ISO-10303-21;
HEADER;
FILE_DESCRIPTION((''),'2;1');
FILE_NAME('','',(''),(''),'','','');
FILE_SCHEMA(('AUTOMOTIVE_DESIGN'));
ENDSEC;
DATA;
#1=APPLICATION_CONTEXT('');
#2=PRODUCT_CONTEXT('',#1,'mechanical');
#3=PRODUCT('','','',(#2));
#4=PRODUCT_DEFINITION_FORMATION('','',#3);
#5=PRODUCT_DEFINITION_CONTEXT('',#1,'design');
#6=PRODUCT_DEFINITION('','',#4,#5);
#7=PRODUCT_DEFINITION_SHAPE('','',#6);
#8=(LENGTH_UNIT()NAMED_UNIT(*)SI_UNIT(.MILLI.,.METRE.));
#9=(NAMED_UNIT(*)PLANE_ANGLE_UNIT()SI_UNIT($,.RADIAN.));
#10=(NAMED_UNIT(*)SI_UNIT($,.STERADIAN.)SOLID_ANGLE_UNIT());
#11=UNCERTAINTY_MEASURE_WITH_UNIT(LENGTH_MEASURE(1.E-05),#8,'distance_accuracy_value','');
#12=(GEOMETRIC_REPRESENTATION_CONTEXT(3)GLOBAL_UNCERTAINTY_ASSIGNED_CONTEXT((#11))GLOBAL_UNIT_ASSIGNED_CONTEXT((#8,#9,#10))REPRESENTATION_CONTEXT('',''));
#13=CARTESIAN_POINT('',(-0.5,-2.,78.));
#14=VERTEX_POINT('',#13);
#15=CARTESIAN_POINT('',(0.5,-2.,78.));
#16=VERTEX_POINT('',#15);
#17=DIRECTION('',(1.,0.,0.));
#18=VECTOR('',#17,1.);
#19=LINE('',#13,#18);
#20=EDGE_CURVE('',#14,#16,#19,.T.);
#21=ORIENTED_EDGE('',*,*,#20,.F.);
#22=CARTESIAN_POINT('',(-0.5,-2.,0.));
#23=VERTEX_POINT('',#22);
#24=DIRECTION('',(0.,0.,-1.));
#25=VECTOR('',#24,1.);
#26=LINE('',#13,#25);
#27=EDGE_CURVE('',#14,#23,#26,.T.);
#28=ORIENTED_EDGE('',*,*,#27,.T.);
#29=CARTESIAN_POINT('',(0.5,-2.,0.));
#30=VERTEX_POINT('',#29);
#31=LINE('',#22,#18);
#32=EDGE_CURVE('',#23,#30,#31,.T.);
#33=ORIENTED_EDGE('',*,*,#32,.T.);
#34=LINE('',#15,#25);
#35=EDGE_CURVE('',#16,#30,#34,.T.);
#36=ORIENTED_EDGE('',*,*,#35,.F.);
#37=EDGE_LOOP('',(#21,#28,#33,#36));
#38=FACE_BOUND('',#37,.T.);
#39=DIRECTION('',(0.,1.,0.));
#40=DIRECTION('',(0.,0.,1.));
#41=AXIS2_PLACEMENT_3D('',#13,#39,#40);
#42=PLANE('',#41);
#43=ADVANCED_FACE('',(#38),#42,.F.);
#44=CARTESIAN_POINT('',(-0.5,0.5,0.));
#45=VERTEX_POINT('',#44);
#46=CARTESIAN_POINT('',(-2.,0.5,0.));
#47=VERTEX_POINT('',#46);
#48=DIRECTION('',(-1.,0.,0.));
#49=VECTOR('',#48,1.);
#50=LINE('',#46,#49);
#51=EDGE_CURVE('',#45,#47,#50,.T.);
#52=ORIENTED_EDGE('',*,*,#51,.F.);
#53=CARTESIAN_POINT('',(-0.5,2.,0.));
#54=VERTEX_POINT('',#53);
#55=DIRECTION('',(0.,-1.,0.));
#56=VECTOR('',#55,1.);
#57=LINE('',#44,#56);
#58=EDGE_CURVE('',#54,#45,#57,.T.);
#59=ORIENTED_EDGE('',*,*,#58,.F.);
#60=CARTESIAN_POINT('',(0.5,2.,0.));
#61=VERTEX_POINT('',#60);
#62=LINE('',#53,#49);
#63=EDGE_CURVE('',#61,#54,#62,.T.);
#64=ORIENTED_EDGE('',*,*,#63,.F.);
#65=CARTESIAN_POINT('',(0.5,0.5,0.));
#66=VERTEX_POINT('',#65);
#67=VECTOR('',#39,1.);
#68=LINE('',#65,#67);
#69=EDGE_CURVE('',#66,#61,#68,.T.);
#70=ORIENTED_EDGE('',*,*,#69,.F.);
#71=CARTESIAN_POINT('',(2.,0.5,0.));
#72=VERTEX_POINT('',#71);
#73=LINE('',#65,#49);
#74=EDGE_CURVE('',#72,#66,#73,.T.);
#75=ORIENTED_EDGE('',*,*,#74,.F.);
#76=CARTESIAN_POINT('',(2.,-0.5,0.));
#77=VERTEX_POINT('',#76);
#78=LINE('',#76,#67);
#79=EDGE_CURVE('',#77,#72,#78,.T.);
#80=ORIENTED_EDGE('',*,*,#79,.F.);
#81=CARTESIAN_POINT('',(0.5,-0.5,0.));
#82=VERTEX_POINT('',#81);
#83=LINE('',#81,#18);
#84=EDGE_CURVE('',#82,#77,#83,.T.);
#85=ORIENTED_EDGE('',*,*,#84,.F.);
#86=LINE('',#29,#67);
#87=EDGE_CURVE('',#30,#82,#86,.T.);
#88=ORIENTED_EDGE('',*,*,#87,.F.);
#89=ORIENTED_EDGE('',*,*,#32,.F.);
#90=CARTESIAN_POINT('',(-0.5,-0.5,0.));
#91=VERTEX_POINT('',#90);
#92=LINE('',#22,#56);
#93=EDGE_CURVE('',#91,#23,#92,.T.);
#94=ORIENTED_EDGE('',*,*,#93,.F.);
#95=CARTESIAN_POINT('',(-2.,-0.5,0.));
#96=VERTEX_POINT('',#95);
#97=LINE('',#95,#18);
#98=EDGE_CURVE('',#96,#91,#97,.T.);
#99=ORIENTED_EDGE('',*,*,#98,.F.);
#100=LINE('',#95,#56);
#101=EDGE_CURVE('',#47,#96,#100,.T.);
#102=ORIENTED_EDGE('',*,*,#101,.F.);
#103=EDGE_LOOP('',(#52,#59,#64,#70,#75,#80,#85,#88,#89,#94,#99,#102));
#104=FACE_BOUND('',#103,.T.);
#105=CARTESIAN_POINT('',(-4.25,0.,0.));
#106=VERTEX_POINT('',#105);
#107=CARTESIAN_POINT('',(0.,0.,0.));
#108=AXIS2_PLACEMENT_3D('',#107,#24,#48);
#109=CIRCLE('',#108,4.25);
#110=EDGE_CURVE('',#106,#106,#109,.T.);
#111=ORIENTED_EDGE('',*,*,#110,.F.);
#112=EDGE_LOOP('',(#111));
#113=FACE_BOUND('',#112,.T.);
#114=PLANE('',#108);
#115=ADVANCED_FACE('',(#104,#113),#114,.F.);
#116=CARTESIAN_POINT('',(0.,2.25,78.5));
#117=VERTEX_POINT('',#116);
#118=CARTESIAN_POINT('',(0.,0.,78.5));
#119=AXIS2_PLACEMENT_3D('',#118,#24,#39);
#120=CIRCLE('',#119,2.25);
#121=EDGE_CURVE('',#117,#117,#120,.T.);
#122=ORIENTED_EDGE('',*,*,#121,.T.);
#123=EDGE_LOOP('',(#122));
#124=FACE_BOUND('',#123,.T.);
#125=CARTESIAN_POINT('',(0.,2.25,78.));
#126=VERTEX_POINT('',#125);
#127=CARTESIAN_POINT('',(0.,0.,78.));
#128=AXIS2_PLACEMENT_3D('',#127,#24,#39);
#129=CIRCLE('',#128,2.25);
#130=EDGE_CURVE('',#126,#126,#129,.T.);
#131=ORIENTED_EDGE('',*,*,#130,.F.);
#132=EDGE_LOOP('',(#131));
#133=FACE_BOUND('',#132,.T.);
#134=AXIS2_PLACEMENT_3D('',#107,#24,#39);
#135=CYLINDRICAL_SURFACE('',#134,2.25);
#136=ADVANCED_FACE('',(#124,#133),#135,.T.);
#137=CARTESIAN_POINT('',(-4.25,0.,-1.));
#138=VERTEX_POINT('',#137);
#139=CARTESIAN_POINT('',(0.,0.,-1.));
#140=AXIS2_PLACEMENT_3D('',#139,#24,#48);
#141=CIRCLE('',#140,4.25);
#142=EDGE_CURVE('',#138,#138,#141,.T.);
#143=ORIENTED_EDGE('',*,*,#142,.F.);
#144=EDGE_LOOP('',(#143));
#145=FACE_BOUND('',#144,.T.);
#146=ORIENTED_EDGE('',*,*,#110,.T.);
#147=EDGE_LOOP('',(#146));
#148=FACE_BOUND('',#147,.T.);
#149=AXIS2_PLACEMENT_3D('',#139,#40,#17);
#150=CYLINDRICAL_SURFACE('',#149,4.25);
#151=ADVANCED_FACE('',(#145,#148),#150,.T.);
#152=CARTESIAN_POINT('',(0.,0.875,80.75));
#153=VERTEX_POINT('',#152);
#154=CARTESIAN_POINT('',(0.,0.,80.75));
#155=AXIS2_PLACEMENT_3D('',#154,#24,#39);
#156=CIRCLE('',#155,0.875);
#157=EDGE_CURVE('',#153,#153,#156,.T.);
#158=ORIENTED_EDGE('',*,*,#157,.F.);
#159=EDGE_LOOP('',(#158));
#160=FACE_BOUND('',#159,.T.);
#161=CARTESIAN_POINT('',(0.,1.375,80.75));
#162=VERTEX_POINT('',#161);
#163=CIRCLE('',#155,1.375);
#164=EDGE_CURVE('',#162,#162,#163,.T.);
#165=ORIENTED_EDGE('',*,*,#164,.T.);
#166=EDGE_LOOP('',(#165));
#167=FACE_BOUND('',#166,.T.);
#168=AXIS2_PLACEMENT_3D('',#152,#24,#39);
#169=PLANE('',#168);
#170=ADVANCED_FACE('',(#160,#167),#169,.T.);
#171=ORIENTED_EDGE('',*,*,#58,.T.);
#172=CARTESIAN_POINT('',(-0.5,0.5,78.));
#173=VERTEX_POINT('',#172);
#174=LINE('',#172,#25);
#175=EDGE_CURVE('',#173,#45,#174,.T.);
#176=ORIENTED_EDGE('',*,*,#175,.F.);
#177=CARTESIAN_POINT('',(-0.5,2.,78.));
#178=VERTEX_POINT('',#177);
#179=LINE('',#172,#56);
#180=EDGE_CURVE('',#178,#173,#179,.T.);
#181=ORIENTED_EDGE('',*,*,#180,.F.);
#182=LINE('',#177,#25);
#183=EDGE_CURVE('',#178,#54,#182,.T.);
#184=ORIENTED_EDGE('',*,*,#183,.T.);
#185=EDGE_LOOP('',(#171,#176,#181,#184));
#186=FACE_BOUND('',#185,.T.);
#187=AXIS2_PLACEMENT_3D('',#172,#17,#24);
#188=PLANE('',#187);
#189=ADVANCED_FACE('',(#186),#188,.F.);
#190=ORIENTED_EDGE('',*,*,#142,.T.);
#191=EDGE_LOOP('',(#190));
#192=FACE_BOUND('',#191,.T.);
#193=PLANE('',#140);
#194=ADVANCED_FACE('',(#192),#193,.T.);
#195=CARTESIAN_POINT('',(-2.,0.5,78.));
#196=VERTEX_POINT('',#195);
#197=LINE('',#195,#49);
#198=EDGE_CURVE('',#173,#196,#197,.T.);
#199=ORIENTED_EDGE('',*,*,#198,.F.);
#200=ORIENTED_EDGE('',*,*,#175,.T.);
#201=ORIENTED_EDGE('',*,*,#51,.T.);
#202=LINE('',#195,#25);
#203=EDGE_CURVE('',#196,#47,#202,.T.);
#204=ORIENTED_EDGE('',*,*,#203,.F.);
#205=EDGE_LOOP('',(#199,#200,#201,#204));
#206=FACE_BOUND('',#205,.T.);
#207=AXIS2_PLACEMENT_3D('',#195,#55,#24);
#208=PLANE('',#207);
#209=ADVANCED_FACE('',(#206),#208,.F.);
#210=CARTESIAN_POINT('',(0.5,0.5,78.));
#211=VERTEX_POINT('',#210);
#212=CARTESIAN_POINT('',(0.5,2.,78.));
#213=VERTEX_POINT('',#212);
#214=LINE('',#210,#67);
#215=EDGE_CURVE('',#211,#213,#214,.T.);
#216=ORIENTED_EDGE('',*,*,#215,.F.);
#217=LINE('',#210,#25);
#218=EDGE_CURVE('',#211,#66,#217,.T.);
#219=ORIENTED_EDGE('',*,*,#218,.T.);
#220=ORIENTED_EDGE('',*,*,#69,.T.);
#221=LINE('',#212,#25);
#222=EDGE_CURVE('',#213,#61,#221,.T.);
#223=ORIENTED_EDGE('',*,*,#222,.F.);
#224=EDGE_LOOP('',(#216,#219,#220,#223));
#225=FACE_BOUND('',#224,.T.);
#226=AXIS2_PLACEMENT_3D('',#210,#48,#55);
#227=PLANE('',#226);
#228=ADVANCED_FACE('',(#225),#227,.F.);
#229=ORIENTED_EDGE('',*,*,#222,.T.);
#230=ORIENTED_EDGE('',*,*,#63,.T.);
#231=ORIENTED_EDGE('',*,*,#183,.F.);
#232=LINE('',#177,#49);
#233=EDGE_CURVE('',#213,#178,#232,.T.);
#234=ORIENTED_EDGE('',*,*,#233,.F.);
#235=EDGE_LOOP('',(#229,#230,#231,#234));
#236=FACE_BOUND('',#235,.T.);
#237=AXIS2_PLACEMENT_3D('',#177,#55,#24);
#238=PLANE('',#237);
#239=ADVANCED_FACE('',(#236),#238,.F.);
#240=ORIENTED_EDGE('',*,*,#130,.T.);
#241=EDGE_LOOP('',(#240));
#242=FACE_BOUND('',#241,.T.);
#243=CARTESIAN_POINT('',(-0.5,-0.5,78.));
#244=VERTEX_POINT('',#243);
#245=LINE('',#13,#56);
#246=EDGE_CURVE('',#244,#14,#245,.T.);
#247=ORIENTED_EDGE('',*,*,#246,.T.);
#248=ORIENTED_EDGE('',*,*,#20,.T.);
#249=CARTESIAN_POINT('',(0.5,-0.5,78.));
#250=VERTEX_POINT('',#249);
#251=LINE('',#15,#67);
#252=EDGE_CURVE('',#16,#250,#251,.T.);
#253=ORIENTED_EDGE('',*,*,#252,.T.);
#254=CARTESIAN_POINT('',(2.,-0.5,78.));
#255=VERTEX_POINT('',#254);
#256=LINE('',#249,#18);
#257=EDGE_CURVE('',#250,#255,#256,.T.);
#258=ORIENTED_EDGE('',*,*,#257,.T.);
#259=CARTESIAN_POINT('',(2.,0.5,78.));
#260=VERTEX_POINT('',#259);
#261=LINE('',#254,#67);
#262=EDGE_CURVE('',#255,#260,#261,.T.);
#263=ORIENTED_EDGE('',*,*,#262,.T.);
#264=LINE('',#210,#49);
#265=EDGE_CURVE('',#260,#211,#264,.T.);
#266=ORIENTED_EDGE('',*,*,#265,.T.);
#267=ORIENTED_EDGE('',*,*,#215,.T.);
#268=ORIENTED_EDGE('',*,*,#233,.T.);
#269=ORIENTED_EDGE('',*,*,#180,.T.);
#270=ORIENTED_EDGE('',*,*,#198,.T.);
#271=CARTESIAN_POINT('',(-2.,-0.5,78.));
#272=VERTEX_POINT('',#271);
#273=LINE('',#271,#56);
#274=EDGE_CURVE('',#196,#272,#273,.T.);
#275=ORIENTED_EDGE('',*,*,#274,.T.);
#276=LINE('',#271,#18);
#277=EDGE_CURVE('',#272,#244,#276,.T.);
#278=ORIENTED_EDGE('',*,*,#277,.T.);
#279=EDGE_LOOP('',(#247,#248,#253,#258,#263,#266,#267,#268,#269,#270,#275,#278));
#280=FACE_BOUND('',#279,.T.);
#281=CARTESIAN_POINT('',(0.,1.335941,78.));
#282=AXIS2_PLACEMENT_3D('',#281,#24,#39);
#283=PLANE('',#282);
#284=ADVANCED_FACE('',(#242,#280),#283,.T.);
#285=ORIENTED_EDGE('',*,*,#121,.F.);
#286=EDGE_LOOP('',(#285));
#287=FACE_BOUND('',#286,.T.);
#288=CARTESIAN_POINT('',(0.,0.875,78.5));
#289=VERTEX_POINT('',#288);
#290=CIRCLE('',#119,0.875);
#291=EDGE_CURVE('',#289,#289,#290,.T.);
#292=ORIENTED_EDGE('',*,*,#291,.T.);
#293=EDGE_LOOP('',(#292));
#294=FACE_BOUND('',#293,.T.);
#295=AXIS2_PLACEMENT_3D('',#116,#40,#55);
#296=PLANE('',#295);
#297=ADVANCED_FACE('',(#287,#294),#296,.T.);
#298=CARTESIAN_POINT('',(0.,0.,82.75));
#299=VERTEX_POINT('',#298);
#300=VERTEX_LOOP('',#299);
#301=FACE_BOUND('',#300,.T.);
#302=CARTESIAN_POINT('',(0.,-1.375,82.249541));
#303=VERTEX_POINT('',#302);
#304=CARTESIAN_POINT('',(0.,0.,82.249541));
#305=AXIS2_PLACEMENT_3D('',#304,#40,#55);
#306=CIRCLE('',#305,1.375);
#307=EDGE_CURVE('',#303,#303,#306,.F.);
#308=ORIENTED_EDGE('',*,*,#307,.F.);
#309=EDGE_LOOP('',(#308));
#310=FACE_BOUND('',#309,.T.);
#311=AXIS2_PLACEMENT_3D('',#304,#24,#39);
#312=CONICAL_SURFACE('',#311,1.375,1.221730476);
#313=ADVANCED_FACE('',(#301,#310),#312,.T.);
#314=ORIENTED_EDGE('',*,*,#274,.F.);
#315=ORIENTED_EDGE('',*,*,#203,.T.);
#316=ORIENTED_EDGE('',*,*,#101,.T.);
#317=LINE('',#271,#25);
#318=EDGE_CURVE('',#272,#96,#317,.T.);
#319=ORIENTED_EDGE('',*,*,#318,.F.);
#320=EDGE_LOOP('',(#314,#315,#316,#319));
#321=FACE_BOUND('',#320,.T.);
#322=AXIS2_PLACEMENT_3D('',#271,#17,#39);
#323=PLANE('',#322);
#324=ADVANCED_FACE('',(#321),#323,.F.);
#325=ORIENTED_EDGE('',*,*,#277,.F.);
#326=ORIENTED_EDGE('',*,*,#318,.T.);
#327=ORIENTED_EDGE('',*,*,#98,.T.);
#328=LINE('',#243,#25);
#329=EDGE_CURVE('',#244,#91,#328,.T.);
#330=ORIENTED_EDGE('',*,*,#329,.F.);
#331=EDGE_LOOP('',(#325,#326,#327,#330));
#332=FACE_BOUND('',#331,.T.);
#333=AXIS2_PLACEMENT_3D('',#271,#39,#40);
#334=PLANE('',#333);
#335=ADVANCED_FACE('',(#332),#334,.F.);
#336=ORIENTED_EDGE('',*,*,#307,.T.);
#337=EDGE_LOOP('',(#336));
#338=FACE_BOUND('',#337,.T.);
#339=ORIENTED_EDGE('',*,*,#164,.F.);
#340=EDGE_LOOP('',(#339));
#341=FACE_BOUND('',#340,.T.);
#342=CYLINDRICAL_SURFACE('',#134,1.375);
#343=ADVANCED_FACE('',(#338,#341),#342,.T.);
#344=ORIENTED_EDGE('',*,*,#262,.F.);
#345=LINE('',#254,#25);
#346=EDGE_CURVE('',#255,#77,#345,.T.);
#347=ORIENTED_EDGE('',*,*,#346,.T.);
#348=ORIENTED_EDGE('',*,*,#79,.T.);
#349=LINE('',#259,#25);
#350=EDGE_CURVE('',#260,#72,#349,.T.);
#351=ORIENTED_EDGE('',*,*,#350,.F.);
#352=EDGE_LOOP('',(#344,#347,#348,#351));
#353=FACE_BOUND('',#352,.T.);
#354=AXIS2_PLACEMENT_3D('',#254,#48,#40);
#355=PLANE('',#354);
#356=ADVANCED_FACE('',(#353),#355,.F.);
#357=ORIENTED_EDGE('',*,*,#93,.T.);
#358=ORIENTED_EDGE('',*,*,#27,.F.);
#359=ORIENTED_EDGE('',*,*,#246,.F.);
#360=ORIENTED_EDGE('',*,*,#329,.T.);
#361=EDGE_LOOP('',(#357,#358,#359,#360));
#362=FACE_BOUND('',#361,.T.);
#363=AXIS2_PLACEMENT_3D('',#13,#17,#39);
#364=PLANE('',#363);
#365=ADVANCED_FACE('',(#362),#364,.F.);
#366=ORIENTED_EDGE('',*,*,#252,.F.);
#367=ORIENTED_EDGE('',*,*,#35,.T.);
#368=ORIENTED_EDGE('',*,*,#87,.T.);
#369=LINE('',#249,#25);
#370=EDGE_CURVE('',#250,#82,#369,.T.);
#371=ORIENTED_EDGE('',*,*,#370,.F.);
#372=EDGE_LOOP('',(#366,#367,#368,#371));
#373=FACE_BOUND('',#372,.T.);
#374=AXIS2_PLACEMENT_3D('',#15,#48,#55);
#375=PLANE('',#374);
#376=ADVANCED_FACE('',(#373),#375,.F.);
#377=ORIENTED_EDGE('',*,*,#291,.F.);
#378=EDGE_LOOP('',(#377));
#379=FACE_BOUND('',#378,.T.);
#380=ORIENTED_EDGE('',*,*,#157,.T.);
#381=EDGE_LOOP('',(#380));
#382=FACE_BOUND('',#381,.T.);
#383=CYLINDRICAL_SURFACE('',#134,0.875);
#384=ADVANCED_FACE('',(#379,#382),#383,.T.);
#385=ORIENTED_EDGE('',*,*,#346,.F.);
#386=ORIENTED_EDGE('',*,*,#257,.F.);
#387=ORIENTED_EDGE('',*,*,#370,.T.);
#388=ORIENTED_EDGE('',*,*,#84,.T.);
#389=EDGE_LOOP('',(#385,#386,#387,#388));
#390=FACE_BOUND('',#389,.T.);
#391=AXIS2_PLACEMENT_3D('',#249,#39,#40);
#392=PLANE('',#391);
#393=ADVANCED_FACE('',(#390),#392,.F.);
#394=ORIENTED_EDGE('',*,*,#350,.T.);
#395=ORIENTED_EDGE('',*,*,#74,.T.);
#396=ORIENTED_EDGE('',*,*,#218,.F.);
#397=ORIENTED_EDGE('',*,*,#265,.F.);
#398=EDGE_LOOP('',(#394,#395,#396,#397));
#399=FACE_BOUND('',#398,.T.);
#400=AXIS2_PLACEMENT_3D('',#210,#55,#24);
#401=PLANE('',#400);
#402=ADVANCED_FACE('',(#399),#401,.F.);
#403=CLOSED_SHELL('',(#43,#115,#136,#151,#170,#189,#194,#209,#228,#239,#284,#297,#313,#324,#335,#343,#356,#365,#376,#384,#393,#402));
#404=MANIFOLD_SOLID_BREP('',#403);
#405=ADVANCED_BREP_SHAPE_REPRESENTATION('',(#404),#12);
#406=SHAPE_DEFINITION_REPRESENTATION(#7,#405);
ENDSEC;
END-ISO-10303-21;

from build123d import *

# Parameters (mm, degrees)
AUFSATZ_LINEAR_AUSTRAGEN1_DEPTH = 78
SKIZZE3_R                       = 4.25
AUFSATZ_LINEAR_AUSTRAGEN3_DEPTH = 1
FASE1_SIZE2                     = 1.375
FASE1_SIZE                      = 0.500459072


with BuildPart() as part:
    # Skizze1 → Aufsatz-Linear austragen1 (new body)
    with BuildSketch(Plane.XY):
        Polygon((0.5, 0.5), (2, 0.5), (2, -0.5), (0.5, -0.5), (0.5, -2), (-0.5, -2), (-0.5, -0.5), (-2, -0.5), (-2, 0.5), (-0.5, 0.5), (-0.5, 2), (0.5, 2), align=None)
    extrude(amount=AUFSATZ_LINEAR_AUSTRAGEN1_DEPTH)

    # Skizze3 → Aufsatz-Linear austragen3 (add)
    with BuildSketch(Plane(origin=(0, 0, 0), x_dir=(-1, 0, 0), z_dir=(0, 0, -1))):
        Circle(SKIZZE3_R)
    extrude(amount=AUFSATZ_LINEAR_AUSTRAGEN3_DEPTH)

    # Skizze4 → Rotation1 (revolve)
    with BuildSketch(Plane(origin=(0, 0, 0), x_dir=(0, 0, -1), z_dir=(1, 0, 0))):
        Polygon((-78, 0), (-78, 1.335941473), (-78, 2.25), (-78.5, 2.25), (-78.5, 0.875), (-80.75, 0.875), (-80.75, 1.375), (-82.75, 1.375), (-82.75, 0), align=None)
    revolve(axis=Axis((0, 0, 0), (0, 0, 1)))

    # Fase1
    fase1_edges = [part.edges().sort_by_distance(p)[0] for p in [
        (0, -1.375, 82.75),
    ]]
    fase1_side = [part.faces().sort_by_distance(p)[0] for p in [
        (0, -1.375, 82.739990819),
    ]]
    chamfer(fase1_edges, length=FASE1_SIZE - 0.0001, length2=FASE1_SIZE2 - 0.0001, reference=fase1_side[0])  # a hair under: the kernel refuses the full size


solid = part.part
